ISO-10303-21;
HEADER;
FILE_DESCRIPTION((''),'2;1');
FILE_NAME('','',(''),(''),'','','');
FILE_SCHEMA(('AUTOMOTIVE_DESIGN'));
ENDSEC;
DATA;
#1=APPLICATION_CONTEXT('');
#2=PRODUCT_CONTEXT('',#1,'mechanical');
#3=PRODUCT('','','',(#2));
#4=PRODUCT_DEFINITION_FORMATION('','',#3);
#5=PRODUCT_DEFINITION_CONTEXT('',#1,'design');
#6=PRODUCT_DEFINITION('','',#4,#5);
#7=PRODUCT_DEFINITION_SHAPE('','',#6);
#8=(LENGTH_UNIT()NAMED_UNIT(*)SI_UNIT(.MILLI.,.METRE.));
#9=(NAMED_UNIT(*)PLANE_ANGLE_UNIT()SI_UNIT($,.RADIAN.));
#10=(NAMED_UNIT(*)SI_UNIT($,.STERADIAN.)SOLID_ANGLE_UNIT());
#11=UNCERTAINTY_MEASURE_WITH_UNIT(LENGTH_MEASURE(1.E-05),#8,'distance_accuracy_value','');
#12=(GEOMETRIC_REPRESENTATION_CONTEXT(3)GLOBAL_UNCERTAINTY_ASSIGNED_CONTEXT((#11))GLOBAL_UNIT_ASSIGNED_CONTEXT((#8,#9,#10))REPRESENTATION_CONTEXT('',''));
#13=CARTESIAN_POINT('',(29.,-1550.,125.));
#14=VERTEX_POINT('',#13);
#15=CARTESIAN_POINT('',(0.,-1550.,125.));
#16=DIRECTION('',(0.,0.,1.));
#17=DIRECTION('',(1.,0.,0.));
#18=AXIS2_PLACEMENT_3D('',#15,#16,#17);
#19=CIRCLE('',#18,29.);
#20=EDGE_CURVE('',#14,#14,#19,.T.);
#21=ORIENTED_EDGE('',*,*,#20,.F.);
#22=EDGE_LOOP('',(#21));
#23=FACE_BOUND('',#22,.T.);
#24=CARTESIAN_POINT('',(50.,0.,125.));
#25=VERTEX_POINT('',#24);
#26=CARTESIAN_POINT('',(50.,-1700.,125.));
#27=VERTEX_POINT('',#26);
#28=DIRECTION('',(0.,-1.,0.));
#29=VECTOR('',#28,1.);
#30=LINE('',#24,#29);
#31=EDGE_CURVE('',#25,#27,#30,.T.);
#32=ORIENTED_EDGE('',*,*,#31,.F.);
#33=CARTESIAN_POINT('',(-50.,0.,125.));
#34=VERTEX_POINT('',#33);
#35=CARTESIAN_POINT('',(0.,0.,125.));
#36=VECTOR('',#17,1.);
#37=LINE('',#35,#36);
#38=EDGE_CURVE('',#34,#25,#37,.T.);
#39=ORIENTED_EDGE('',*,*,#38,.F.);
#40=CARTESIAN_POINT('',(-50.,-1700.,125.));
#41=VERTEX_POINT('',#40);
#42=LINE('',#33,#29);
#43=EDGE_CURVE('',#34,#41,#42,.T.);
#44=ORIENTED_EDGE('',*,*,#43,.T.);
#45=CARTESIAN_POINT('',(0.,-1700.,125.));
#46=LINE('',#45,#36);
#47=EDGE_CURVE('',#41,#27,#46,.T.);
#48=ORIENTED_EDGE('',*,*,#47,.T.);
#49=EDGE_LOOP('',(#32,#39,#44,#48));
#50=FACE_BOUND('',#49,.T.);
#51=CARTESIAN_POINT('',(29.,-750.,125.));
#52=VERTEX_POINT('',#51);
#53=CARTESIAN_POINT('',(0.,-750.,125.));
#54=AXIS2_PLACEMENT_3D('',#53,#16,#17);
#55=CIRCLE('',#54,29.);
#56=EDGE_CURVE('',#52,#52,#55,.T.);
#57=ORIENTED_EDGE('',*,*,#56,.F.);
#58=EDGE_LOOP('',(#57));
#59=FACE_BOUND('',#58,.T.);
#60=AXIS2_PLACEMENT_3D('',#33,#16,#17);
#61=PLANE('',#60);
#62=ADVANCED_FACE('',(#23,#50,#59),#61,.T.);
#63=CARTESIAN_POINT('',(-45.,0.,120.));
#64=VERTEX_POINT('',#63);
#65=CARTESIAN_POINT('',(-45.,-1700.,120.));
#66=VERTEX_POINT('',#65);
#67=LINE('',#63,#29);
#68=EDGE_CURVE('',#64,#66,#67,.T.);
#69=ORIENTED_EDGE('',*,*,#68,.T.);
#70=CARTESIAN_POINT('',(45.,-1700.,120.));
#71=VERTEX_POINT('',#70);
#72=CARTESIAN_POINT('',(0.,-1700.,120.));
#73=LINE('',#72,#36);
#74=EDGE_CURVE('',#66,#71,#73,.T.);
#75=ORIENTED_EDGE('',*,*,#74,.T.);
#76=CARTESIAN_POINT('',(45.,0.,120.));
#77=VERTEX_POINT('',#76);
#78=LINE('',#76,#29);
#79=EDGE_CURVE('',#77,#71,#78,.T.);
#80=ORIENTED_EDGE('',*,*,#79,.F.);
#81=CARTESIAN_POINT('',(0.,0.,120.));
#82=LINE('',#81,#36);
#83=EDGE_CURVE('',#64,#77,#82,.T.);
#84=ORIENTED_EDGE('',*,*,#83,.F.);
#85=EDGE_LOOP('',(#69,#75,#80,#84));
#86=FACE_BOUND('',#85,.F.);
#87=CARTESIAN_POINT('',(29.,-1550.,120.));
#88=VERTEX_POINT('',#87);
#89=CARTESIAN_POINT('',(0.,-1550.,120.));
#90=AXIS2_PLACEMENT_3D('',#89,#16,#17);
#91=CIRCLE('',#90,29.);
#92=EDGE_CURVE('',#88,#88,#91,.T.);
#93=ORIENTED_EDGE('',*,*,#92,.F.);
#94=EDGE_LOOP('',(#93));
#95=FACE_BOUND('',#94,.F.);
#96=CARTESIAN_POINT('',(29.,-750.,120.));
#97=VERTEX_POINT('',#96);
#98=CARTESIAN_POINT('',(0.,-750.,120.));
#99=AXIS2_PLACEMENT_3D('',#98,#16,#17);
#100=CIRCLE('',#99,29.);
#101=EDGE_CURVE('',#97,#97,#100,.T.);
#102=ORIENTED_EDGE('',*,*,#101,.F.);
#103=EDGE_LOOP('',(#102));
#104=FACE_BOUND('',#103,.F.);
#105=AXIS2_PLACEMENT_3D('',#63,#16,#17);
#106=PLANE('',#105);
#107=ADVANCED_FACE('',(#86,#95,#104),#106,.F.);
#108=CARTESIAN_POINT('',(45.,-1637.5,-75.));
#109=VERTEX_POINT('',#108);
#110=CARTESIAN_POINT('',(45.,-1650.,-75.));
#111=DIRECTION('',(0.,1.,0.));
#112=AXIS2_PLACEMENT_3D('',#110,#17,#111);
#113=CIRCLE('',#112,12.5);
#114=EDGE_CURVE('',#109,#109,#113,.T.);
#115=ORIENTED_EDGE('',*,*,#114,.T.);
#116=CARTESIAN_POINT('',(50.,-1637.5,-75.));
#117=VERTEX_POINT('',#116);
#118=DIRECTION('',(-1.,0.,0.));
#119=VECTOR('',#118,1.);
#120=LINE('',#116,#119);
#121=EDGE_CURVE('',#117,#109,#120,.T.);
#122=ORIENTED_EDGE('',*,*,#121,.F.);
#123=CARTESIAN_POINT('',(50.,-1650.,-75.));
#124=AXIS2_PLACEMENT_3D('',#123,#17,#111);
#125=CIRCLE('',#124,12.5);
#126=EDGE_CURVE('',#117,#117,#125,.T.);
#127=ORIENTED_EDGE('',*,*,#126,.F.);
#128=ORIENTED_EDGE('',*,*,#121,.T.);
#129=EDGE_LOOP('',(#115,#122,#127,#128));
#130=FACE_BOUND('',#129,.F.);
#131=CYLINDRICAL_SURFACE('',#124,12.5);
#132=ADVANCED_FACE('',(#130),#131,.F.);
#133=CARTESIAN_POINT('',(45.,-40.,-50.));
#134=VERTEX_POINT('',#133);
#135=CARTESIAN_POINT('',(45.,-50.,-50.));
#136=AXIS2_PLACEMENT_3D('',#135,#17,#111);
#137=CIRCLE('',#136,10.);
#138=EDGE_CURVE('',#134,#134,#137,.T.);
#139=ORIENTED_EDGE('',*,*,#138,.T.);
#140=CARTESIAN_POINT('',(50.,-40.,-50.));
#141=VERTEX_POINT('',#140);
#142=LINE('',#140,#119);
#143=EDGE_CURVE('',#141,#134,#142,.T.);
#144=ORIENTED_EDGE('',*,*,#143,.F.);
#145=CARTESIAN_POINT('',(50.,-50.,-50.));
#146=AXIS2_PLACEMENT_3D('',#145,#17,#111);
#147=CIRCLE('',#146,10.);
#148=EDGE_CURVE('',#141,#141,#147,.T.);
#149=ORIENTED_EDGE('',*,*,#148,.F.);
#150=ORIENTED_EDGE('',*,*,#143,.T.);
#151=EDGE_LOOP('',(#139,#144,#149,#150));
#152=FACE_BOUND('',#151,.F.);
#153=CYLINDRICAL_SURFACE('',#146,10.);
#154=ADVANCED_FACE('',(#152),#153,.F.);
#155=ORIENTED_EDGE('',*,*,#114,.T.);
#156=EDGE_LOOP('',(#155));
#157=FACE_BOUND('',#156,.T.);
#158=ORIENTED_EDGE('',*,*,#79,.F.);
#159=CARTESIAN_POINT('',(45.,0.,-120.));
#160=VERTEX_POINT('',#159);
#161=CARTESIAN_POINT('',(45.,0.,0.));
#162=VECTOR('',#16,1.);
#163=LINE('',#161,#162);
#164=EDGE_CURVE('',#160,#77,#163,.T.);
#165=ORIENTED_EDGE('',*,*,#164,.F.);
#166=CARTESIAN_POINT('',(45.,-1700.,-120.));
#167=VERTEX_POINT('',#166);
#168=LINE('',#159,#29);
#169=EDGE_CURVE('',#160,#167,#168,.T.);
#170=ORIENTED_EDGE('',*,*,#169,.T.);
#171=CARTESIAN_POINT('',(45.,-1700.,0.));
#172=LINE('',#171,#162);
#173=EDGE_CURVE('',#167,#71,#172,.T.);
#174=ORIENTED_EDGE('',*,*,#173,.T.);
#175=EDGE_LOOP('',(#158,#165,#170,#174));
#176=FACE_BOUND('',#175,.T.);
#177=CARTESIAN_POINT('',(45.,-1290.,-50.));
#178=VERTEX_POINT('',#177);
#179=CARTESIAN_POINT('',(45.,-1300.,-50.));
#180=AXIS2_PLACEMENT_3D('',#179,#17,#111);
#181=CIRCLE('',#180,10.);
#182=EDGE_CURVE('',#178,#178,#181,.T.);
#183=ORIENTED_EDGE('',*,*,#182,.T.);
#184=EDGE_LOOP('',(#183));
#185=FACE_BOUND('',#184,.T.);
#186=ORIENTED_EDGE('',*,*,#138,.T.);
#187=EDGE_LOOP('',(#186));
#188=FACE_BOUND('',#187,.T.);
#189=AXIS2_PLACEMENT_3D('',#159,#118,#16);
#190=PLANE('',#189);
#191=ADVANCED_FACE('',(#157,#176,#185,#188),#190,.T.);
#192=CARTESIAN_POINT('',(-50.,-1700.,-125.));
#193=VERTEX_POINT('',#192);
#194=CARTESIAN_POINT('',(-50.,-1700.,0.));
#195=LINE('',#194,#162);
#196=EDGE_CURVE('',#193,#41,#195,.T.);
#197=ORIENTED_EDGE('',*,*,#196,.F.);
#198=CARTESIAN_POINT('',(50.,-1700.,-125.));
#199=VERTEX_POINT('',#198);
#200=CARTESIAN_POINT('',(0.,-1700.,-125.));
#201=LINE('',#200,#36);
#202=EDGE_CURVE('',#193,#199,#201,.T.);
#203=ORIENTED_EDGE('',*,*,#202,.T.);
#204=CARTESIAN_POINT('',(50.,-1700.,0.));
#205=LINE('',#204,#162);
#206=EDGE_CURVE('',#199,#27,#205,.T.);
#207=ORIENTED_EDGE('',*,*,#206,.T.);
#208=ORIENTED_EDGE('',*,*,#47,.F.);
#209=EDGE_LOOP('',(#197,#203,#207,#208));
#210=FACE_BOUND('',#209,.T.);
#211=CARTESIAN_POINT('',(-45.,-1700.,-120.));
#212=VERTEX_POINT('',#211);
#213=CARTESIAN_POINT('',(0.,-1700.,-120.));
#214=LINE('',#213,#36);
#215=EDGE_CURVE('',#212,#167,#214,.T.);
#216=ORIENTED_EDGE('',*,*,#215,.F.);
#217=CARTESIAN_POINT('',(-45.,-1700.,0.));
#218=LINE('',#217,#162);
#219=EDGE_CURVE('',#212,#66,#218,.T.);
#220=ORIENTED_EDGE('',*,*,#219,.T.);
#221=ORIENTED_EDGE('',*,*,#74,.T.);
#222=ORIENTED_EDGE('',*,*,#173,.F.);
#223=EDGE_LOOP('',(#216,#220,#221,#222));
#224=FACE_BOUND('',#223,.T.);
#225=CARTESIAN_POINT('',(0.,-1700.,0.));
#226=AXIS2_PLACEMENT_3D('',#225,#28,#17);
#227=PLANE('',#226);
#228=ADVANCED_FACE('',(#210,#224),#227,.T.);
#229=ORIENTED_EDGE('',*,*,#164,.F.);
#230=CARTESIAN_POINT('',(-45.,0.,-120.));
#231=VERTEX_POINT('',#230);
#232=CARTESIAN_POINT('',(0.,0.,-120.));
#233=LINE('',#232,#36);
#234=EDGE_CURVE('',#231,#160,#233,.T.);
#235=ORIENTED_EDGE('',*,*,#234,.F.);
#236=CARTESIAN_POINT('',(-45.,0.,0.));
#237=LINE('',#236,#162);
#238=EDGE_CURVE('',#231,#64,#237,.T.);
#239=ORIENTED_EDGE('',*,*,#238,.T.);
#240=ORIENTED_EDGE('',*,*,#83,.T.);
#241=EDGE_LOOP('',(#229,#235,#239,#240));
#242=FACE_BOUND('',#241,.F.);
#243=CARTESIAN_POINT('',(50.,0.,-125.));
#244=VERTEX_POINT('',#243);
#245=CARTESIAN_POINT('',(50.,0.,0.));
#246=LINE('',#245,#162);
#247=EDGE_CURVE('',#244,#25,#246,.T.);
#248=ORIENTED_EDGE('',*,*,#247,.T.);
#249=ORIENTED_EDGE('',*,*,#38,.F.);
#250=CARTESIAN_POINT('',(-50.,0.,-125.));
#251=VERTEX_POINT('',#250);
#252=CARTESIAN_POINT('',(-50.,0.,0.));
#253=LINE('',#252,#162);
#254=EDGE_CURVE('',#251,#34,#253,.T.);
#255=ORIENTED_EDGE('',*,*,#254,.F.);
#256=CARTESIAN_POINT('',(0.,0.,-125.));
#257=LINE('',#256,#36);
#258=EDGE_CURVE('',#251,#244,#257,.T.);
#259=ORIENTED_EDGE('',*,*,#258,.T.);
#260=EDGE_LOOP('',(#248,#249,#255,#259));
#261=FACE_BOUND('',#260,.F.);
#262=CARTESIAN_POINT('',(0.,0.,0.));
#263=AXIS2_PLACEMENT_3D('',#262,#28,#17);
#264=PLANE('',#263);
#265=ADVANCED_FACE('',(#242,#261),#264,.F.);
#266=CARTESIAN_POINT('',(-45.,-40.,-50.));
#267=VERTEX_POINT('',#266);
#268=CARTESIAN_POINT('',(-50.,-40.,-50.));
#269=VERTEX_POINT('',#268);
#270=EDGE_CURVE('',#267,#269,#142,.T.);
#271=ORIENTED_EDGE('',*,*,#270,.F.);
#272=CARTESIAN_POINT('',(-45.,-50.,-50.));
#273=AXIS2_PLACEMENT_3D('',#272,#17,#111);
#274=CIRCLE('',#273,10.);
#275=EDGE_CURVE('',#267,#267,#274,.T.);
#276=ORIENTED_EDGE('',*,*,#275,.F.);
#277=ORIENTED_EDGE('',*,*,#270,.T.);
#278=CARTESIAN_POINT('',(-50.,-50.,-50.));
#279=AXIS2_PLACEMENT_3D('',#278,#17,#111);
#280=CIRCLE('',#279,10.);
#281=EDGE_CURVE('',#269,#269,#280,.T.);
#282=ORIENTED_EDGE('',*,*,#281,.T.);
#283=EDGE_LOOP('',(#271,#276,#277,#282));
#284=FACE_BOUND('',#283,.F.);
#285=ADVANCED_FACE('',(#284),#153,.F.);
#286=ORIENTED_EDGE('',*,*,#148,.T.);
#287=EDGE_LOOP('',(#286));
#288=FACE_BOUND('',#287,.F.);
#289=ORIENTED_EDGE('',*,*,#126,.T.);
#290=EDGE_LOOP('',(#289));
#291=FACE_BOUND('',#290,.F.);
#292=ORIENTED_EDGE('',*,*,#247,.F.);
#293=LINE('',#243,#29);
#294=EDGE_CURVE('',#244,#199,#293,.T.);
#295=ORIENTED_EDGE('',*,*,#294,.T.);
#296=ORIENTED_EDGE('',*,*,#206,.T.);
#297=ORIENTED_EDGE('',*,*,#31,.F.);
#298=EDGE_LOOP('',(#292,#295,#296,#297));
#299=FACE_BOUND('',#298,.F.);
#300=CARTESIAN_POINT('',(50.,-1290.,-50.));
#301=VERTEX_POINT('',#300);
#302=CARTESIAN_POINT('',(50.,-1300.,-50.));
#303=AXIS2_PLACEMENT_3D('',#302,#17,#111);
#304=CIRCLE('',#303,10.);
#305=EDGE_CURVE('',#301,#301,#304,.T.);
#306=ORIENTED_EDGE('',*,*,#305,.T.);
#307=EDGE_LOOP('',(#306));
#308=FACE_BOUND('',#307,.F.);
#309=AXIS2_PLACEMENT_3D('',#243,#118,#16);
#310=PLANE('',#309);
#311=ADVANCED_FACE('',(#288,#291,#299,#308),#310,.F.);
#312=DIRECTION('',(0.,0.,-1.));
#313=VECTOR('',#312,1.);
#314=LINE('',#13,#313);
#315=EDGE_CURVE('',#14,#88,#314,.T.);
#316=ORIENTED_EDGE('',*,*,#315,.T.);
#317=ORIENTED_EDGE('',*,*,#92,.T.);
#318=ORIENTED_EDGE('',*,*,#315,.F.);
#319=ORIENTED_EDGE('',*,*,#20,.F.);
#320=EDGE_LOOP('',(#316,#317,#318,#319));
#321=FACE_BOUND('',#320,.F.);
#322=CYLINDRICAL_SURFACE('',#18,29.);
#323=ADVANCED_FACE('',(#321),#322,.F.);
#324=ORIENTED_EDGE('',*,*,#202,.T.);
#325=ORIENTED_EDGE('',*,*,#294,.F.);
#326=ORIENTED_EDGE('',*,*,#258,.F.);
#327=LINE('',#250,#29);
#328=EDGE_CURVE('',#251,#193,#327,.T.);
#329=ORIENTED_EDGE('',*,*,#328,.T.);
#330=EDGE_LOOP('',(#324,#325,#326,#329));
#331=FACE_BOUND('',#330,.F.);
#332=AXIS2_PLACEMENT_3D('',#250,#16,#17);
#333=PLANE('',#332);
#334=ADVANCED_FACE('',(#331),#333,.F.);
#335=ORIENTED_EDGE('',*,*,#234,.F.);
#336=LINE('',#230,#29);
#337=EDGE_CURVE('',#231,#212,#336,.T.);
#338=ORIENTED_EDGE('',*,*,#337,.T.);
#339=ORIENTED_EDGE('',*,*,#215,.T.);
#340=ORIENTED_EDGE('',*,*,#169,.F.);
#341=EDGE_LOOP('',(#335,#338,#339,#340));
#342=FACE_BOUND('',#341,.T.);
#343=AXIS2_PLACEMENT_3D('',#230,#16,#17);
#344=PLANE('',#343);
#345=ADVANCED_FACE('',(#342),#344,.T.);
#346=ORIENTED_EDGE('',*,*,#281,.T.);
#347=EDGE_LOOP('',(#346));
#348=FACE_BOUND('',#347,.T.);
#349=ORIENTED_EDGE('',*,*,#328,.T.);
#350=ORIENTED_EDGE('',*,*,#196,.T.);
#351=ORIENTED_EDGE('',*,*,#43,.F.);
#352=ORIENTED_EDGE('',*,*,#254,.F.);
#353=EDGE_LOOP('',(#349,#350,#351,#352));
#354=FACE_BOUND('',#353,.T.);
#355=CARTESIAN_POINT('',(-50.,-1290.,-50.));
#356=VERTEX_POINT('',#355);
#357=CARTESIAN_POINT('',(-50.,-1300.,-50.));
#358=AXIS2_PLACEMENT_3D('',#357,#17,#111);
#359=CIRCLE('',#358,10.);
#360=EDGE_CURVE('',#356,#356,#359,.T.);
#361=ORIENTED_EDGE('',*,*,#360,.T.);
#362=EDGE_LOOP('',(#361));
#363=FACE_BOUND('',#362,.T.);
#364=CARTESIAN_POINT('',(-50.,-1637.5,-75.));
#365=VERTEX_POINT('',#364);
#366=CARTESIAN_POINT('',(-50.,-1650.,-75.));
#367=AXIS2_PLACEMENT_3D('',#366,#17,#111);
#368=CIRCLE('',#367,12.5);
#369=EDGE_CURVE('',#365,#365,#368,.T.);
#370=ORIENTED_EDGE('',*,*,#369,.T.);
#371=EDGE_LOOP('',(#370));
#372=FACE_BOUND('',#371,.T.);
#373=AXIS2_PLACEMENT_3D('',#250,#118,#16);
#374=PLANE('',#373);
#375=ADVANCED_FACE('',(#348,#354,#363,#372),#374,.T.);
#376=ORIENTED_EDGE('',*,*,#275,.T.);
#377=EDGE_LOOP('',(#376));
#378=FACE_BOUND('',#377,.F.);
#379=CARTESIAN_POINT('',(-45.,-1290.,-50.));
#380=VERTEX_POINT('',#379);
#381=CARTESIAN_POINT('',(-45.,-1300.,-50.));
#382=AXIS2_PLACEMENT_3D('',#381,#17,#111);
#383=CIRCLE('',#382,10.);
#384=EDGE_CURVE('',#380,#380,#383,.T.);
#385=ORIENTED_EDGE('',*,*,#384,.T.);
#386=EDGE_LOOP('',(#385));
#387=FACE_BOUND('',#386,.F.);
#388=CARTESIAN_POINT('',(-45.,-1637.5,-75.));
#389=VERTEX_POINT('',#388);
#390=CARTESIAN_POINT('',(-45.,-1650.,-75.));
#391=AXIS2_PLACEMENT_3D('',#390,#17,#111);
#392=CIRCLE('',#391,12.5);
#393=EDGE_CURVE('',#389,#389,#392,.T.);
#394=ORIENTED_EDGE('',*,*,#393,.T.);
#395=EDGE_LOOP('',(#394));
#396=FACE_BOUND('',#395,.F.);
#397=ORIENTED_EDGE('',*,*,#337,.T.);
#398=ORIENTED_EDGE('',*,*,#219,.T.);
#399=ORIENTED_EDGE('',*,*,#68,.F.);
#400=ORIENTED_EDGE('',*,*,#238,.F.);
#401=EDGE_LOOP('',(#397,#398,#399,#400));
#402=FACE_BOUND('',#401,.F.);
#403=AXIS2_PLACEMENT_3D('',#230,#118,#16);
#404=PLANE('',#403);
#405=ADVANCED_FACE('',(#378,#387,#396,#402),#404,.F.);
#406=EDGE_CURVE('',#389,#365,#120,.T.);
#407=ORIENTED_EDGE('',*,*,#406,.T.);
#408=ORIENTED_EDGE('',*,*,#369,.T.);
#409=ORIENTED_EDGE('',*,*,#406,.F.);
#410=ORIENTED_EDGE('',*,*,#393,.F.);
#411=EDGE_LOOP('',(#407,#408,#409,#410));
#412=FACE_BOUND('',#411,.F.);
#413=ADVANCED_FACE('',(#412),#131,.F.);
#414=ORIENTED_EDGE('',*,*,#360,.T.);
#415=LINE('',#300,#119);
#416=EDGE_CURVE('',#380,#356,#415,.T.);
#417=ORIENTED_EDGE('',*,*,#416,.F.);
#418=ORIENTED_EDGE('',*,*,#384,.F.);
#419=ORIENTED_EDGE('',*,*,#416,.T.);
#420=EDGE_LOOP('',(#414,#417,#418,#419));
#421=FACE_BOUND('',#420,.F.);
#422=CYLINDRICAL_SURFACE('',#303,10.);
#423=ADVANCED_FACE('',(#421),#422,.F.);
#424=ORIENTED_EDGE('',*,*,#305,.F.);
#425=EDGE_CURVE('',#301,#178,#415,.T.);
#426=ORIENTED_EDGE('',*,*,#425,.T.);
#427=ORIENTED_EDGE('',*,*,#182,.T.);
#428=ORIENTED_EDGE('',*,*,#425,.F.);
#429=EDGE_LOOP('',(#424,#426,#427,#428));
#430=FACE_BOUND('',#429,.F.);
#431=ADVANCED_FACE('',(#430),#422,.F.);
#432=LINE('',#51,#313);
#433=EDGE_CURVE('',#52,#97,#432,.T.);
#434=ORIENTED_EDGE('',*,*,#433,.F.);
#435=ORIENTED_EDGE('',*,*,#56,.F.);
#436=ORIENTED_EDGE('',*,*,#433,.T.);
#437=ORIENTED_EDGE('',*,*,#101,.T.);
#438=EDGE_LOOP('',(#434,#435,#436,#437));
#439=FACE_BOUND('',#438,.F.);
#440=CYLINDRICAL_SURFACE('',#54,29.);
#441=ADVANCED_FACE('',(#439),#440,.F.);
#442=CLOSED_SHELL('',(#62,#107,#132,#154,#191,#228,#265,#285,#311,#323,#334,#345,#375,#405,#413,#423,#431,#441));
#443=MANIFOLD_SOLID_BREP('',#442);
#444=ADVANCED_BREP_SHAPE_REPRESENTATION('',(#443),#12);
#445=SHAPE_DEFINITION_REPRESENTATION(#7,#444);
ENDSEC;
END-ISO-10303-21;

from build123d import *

# Parameters (mm, degrees)
F0_W      = 100
F0_H      = 250
F0_W_2    = 90
F0_H_2    = 240
F1_DEPTH  = 1700
F2_R      = 10
F3_DEPTH  = 100.001
F4_R      = 10
F5_DEPTH  = 100.001
F6_R      = 29
F7_R      = 29
F8_DEPTH  = 5
F9_R      = 12.5
F10_DEPTH = 100.001


# Not quite as in the source:
# - a feature names something its author has since deleted; it is built from what else it names


with BuildPart() as f1:
    # F0 (on Front) → F1 (new body)
    with BuildSketch(Plane.XZ):
        Rectangle(F0_W, F0_H)
        Rectangle(F0_W_2, F0_H_2, mode=Mode.SUBTRACT)
    extrude(amount=F1_DEPTH)

    # F2 (on face) → F3 (cut, through all)
    with BuildSketch(Plane.YZ.offset(50)):
        with Locations((-1300, -50)):
            Circle(F2_R)
    extrude(amount=-F3_DEPTH, mode=Mode.SUBTRACT)

    # F4 (on face) → F5 (cut, through all)
    with BuildSketch(Plane.YZ.offset(50)):
        with Locations((-50, -50)):
            Circle(F4_R)
    extrude(amount=-F5_DEPTH, mode=Mode.SUBTRACT)

    # F6 (on face) + F7 (on face) → F8 (cut, through all)
    with BuildSketch(Plane.XY.offset(125)):
        with Locations((0, -1550)):
            Circle(F6_R)
    with BuildSketch(Plane.XY.offset(125)):
        with Locations((0, -750)):
            Circle(F7_R)
    extrude(amount=-F8_DEPTH, mode=Mode.SUBTRACT)

    # F9 (on face) → F10 (cut, through all)
    with BuildSketch(Plane.YZ.offset(50)):
        with Locations((-1650, -75)):
            Circle(F9_R)
    extrude(amount=-F10_DEPTH, mode=Mode.SUBTRACT)


solid = f1.part
